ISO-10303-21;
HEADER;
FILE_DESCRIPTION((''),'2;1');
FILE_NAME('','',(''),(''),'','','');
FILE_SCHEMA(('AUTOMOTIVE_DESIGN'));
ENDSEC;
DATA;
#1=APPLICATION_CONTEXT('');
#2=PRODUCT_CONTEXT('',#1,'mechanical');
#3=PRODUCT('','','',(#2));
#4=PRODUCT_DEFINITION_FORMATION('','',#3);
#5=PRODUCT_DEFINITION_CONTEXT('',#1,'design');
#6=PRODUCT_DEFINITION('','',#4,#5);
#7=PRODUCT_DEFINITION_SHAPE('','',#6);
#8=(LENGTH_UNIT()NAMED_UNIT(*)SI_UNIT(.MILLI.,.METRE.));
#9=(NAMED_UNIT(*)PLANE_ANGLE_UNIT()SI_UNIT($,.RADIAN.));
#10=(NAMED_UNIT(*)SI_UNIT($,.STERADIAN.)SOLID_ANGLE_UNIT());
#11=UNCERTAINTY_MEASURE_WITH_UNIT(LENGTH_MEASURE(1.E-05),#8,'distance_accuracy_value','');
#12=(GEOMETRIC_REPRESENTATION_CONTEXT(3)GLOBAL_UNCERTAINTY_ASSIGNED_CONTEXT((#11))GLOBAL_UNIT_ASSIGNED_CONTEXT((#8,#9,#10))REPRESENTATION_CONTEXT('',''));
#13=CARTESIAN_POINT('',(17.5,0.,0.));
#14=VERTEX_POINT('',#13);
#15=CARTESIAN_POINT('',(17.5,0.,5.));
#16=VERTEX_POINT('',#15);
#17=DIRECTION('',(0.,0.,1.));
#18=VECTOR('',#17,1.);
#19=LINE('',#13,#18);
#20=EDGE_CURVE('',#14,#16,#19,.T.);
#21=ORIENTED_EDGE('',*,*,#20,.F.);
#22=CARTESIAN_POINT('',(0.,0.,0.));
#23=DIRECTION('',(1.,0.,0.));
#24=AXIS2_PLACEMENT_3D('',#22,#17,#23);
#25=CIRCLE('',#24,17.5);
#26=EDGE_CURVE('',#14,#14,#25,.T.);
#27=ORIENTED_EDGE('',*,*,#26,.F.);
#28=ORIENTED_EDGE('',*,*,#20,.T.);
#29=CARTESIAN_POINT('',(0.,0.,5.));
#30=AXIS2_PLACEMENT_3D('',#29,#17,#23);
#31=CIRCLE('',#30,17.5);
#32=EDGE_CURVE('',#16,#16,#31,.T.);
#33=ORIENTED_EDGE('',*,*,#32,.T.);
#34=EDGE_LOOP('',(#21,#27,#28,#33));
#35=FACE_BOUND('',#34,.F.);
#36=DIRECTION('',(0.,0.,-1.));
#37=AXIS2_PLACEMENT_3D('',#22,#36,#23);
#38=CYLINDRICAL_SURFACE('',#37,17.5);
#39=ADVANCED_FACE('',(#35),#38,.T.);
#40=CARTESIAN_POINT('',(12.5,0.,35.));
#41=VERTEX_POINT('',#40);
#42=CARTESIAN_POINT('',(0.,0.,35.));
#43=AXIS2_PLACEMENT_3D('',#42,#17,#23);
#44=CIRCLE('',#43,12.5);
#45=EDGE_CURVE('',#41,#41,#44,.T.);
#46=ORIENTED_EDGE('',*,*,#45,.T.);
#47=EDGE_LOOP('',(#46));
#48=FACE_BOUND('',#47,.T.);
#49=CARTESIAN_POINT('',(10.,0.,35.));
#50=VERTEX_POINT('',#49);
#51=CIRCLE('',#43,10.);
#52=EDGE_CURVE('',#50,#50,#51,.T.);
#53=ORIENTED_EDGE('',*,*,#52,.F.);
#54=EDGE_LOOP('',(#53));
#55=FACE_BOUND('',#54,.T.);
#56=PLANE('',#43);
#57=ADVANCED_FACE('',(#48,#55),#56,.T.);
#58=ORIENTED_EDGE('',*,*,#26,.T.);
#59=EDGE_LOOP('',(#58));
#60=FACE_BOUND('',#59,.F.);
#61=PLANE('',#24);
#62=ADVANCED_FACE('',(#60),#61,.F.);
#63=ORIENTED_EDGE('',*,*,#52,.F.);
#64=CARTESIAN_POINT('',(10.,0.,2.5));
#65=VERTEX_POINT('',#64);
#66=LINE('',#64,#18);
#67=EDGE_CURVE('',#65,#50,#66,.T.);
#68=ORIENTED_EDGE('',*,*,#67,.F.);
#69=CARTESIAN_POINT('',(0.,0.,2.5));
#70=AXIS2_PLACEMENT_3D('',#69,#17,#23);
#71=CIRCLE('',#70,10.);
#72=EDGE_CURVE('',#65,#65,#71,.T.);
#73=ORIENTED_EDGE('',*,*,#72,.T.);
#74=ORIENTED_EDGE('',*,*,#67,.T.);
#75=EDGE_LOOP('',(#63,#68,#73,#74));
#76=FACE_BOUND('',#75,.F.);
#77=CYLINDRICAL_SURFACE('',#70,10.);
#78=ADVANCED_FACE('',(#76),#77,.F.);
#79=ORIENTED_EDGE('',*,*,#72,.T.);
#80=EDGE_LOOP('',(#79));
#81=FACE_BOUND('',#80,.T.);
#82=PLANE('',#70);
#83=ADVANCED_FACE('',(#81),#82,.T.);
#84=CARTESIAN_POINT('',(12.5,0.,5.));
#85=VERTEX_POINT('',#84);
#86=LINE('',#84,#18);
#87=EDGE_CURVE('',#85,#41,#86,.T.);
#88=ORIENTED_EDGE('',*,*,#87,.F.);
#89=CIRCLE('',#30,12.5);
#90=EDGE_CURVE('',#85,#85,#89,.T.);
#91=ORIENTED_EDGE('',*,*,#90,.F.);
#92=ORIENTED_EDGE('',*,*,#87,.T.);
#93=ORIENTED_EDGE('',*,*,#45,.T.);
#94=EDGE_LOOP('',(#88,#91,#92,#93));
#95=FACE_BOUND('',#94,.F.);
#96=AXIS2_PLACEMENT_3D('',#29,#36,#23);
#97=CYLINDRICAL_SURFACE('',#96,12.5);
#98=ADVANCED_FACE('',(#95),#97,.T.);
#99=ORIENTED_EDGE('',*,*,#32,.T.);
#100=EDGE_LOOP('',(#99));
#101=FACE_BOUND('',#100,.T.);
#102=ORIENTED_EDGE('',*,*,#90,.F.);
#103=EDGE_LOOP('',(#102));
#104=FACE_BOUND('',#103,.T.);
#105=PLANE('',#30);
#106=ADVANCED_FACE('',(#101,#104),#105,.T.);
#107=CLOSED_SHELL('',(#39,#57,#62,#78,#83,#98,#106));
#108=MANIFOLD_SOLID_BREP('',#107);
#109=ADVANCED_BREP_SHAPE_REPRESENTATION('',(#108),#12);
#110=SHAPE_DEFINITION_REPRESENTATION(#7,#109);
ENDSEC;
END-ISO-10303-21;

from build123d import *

# Parameters (mm, degrees)
F0_R     = 17.5
F1_DEPTH = 5
F2_R     = 12.5
F3_DEPTH = 30
F4_T     = 2.5


# Not quite as in the source:
# - a shell that OpenCascade refuses in one call is made with other operations: the cavity is built on its own and cut out


with BuildPart() as f1:
    # F0 (on Top) → F1 (new body)
    with BuildSketch(Plane.XY):
        Circle(F0_R)
    extrude(amount=F1_DEPTH)

    # F2 (on face) → F3 (join)
    with BuildSketch(Plane.XY.offset(5)):
        Circle(F2_R)
    extrude(amount=F3_DEPTH)

    # F4: shell of thickness 2.5, made by hand


with BuildPart() as f4_core1:
    # F4_t2: copy of F1
    add(f1.part)

    # the walls: a layer under each face that stays
    f4_faces = [f4_core1.faces().sort_by_distance(p)[0] for p in [
        (-17.5, 0, 2.5),
        (0, 0, 0),
        (-11.6666666667, -11.6666666667, 5),
        (-12.5, 0, 20),
    ]]
    thicken(f4_faces, amount=-F4_T, mode=Mode.SUBTRACT)

    # F4_s3 → F4_t4 (revolve, cut)
    with BuildSketch(Plane.XZ):
        Polygon((12.525, 5.025), (12.5, 2.5), (10, 2.5), (10, 5), align=None)
    revolve(axis=Axis((0, 0, 5), (0, 0, 1)), mode=Mode.SUBTRACT)


with BuildPart() as f1_1:
    add(f1.part)

    # what is left inside the walls is the cavity
    f4_cavity = [f4_core1.part.solids().sort_by_distance(p)[0] for p in [
        (-9.975, 0, 13.333333),
    ]]
    add(f4_cavity, mode=Mode.SUBTRACT)


solid = f1_1.part
